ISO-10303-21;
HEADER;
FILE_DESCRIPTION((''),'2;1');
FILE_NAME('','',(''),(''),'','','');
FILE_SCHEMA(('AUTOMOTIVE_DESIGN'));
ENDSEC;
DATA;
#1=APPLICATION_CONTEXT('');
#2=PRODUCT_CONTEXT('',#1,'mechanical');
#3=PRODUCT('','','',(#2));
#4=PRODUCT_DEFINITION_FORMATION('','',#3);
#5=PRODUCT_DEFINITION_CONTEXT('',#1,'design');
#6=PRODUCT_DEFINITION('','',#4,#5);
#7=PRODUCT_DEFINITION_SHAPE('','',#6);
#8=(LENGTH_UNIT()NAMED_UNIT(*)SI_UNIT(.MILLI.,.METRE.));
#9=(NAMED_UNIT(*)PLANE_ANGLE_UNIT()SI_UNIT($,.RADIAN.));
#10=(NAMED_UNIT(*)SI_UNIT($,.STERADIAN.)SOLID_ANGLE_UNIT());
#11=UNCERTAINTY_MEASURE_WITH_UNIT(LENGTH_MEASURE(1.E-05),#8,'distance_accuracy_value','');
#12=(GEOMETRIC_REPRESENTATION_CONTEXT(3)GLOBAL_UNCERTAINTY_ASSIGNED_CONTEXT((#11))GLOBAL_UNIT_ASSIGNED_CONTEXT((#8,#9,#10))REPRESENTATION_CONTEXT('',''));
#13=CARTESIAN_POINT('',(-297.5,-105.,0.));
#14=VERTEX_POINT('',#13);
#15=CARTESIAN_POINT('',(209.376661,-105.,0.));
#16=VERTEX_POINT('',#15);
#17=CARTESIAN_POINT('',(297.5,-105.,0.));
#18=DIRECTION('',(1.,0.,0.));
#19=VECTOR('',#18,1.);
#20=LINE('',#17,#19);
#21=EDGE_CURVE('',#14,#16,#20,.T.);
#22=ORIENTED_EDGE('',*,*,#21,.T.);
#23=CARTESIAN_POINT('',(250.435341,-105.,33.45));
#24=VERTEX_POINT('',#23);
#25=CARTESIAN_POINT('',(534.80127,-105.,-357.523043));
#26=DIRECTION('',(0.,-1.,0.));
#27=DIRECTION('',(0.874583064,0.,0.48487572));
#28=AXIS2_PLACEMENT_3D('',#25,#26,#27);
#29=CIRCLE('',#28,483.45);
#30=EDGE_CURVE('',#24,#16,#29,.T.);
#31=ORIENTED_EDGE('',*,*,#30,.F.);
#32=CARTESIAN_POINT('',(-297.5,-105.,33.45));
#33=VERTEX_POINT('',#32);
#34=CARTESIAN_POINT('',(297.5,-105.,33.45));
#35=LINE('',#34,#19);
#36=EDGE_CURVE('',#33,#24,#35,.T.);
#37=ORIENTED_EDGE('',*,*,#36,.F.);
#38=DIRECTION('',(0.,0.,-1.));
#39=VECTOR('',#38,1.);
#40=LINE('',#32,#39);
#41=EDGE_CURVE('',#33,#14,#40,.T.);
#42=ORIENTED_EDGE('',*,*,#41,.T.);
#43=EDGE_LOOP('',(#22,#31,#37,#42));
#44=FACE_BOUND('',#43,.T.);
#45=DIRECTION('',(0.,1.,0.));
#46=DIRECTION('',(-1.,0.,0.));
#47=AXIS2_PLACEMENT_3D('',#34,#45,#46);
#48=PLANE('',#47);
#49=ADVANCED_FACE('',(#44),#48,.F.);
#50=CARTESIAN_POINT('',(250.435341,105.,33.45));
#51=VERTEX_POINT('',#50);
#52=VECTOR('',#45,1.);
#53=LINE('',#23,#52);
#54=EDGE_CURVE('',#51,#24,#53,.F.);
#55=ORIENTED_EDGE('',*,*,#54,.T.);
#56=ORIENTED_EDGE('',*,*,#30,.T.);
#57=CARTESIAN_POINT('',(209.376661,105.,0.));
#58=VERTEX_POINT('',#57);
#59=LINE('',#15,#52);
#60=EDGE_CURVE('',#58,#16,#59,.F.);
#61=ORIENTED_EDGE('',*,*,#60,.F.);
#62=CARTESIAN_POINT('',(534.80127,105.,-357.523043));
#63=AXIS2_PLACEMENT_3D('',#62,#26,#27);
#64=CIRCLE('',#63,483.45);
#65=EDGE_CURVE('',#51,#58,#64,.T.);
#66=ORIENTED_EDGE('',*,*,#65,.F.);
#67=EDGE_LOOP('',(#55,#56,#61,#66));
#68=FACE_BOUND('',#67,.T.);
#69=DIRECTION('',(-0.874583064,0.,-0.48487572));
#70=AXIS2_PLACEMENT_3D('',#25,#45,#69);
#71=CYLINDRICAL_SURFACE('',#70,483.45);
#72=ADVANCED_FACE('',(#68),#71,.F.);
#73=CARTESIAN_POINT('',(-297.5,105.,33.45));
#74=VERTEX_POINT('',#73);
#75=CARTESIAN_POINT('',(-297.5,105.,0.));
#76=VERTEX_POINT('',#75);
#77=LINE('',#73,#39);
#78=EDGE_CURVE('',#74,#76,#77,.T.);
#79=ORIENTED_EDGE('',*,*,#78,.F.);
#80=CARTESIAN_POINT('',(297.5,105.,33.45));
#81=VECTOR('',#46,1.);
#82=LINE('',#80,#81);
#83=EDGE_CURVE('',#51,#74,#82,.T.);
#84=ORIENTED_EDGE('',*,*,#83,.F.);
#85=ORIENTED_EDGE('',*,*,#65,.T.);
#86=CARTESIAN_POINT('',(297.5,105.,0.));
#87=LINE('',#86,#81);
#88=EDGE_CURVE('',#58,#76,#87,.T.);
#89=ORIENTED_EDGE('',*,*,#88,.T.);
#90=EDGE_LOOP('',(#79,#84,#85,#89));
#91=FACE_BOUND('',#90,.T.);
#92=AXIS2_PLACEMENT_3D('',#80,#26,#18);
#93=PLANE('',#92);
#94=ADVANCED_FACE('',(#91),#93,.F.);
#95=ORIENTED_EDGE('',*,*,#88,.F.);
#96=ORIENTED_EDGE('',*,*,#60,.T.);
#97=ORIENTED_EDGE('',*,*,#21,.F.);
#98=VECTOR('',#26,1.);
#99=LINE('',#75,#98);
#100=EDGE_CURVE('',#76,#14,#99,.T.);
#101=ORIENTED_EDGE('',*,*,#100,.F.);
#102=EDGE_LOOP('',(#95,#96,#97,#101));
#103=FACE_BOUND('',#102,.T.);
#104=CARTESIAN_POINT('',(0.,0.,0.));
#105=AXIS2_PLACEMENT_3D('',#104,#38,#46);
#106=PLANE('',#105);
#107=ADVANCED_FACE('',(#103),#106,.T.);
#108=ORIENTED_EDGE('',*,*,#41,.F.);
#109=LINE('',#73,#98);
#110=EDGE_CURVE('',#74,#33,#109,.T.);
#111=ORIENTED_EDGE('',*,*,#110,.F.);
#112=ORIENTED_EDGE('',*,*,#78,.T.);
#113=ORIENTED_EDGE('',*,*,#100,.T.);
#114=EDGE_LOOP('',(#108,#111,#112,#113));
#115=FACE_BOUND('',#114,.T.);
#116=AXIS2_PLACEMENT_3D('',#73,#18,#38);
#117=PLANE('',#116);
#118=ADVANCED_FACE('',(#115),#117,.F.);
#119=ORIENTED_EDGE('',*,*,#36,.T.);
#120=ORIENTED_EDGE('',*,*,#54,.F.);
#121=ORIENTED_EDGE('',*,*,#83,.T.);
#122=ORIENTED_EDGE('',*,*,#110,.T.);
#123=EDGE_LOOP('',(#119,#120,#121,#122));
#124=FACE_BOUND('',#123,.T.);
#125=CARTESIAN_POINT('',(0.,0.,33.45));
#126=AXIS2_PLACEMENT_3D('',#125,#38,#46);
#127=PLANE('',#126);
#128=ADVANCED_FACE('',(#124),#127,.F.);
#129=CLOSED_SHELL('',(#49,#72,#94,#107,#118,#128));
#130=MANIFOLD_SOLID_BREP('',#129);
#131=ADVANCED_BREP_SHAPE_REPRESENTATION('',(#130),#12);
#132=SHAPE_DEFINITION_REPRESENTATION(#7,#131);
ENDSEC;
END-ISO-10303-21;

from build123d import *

# Parameters (mm, degrees)
SKETCH1_W           = 595
SKETCH1_H           = 210
BOSS_EXTRUDE1_DEPTH = 33.45
CAVITY3_START       = -105
CAVITY3_DEPTH       = 210


# Read off the part's stored shape, not the designer's step: Cavity3
with BuildPart() as part:
    # Sketch1 → Boss-Extrude1 (new body)
    with BuildSketch(Plane.XY):
        Rectangle(SKETCH1_W, SKETCH1_H)
    extrude(amount=BOSS_EXTRUDE1_DEPTH)

    # Cavity3 outline → Cavity3 (cut)
    with BuildSketch(Plane(origin=(0, 0, 0), x_dir=(1, 0, 0), z_dir=(0, 1, 0)).offset(CAVITY3_START)):
        with BuildLine():
            Line((297.5, 0), (209.376661417, 0))
            ThreePointArc((209.376661417, 0), (229.447621493, -17.287644513), (250.435340671, -33.45))
            Line((250.435340671, -33.45), (297.5, -33.45))
            Line((297.5, -33.45), (297.5, 0))
        make_face()
    extrude(amount=CAVITY3_DEPTH, mode=Mode.SUBTRACT)


solid = part.part
